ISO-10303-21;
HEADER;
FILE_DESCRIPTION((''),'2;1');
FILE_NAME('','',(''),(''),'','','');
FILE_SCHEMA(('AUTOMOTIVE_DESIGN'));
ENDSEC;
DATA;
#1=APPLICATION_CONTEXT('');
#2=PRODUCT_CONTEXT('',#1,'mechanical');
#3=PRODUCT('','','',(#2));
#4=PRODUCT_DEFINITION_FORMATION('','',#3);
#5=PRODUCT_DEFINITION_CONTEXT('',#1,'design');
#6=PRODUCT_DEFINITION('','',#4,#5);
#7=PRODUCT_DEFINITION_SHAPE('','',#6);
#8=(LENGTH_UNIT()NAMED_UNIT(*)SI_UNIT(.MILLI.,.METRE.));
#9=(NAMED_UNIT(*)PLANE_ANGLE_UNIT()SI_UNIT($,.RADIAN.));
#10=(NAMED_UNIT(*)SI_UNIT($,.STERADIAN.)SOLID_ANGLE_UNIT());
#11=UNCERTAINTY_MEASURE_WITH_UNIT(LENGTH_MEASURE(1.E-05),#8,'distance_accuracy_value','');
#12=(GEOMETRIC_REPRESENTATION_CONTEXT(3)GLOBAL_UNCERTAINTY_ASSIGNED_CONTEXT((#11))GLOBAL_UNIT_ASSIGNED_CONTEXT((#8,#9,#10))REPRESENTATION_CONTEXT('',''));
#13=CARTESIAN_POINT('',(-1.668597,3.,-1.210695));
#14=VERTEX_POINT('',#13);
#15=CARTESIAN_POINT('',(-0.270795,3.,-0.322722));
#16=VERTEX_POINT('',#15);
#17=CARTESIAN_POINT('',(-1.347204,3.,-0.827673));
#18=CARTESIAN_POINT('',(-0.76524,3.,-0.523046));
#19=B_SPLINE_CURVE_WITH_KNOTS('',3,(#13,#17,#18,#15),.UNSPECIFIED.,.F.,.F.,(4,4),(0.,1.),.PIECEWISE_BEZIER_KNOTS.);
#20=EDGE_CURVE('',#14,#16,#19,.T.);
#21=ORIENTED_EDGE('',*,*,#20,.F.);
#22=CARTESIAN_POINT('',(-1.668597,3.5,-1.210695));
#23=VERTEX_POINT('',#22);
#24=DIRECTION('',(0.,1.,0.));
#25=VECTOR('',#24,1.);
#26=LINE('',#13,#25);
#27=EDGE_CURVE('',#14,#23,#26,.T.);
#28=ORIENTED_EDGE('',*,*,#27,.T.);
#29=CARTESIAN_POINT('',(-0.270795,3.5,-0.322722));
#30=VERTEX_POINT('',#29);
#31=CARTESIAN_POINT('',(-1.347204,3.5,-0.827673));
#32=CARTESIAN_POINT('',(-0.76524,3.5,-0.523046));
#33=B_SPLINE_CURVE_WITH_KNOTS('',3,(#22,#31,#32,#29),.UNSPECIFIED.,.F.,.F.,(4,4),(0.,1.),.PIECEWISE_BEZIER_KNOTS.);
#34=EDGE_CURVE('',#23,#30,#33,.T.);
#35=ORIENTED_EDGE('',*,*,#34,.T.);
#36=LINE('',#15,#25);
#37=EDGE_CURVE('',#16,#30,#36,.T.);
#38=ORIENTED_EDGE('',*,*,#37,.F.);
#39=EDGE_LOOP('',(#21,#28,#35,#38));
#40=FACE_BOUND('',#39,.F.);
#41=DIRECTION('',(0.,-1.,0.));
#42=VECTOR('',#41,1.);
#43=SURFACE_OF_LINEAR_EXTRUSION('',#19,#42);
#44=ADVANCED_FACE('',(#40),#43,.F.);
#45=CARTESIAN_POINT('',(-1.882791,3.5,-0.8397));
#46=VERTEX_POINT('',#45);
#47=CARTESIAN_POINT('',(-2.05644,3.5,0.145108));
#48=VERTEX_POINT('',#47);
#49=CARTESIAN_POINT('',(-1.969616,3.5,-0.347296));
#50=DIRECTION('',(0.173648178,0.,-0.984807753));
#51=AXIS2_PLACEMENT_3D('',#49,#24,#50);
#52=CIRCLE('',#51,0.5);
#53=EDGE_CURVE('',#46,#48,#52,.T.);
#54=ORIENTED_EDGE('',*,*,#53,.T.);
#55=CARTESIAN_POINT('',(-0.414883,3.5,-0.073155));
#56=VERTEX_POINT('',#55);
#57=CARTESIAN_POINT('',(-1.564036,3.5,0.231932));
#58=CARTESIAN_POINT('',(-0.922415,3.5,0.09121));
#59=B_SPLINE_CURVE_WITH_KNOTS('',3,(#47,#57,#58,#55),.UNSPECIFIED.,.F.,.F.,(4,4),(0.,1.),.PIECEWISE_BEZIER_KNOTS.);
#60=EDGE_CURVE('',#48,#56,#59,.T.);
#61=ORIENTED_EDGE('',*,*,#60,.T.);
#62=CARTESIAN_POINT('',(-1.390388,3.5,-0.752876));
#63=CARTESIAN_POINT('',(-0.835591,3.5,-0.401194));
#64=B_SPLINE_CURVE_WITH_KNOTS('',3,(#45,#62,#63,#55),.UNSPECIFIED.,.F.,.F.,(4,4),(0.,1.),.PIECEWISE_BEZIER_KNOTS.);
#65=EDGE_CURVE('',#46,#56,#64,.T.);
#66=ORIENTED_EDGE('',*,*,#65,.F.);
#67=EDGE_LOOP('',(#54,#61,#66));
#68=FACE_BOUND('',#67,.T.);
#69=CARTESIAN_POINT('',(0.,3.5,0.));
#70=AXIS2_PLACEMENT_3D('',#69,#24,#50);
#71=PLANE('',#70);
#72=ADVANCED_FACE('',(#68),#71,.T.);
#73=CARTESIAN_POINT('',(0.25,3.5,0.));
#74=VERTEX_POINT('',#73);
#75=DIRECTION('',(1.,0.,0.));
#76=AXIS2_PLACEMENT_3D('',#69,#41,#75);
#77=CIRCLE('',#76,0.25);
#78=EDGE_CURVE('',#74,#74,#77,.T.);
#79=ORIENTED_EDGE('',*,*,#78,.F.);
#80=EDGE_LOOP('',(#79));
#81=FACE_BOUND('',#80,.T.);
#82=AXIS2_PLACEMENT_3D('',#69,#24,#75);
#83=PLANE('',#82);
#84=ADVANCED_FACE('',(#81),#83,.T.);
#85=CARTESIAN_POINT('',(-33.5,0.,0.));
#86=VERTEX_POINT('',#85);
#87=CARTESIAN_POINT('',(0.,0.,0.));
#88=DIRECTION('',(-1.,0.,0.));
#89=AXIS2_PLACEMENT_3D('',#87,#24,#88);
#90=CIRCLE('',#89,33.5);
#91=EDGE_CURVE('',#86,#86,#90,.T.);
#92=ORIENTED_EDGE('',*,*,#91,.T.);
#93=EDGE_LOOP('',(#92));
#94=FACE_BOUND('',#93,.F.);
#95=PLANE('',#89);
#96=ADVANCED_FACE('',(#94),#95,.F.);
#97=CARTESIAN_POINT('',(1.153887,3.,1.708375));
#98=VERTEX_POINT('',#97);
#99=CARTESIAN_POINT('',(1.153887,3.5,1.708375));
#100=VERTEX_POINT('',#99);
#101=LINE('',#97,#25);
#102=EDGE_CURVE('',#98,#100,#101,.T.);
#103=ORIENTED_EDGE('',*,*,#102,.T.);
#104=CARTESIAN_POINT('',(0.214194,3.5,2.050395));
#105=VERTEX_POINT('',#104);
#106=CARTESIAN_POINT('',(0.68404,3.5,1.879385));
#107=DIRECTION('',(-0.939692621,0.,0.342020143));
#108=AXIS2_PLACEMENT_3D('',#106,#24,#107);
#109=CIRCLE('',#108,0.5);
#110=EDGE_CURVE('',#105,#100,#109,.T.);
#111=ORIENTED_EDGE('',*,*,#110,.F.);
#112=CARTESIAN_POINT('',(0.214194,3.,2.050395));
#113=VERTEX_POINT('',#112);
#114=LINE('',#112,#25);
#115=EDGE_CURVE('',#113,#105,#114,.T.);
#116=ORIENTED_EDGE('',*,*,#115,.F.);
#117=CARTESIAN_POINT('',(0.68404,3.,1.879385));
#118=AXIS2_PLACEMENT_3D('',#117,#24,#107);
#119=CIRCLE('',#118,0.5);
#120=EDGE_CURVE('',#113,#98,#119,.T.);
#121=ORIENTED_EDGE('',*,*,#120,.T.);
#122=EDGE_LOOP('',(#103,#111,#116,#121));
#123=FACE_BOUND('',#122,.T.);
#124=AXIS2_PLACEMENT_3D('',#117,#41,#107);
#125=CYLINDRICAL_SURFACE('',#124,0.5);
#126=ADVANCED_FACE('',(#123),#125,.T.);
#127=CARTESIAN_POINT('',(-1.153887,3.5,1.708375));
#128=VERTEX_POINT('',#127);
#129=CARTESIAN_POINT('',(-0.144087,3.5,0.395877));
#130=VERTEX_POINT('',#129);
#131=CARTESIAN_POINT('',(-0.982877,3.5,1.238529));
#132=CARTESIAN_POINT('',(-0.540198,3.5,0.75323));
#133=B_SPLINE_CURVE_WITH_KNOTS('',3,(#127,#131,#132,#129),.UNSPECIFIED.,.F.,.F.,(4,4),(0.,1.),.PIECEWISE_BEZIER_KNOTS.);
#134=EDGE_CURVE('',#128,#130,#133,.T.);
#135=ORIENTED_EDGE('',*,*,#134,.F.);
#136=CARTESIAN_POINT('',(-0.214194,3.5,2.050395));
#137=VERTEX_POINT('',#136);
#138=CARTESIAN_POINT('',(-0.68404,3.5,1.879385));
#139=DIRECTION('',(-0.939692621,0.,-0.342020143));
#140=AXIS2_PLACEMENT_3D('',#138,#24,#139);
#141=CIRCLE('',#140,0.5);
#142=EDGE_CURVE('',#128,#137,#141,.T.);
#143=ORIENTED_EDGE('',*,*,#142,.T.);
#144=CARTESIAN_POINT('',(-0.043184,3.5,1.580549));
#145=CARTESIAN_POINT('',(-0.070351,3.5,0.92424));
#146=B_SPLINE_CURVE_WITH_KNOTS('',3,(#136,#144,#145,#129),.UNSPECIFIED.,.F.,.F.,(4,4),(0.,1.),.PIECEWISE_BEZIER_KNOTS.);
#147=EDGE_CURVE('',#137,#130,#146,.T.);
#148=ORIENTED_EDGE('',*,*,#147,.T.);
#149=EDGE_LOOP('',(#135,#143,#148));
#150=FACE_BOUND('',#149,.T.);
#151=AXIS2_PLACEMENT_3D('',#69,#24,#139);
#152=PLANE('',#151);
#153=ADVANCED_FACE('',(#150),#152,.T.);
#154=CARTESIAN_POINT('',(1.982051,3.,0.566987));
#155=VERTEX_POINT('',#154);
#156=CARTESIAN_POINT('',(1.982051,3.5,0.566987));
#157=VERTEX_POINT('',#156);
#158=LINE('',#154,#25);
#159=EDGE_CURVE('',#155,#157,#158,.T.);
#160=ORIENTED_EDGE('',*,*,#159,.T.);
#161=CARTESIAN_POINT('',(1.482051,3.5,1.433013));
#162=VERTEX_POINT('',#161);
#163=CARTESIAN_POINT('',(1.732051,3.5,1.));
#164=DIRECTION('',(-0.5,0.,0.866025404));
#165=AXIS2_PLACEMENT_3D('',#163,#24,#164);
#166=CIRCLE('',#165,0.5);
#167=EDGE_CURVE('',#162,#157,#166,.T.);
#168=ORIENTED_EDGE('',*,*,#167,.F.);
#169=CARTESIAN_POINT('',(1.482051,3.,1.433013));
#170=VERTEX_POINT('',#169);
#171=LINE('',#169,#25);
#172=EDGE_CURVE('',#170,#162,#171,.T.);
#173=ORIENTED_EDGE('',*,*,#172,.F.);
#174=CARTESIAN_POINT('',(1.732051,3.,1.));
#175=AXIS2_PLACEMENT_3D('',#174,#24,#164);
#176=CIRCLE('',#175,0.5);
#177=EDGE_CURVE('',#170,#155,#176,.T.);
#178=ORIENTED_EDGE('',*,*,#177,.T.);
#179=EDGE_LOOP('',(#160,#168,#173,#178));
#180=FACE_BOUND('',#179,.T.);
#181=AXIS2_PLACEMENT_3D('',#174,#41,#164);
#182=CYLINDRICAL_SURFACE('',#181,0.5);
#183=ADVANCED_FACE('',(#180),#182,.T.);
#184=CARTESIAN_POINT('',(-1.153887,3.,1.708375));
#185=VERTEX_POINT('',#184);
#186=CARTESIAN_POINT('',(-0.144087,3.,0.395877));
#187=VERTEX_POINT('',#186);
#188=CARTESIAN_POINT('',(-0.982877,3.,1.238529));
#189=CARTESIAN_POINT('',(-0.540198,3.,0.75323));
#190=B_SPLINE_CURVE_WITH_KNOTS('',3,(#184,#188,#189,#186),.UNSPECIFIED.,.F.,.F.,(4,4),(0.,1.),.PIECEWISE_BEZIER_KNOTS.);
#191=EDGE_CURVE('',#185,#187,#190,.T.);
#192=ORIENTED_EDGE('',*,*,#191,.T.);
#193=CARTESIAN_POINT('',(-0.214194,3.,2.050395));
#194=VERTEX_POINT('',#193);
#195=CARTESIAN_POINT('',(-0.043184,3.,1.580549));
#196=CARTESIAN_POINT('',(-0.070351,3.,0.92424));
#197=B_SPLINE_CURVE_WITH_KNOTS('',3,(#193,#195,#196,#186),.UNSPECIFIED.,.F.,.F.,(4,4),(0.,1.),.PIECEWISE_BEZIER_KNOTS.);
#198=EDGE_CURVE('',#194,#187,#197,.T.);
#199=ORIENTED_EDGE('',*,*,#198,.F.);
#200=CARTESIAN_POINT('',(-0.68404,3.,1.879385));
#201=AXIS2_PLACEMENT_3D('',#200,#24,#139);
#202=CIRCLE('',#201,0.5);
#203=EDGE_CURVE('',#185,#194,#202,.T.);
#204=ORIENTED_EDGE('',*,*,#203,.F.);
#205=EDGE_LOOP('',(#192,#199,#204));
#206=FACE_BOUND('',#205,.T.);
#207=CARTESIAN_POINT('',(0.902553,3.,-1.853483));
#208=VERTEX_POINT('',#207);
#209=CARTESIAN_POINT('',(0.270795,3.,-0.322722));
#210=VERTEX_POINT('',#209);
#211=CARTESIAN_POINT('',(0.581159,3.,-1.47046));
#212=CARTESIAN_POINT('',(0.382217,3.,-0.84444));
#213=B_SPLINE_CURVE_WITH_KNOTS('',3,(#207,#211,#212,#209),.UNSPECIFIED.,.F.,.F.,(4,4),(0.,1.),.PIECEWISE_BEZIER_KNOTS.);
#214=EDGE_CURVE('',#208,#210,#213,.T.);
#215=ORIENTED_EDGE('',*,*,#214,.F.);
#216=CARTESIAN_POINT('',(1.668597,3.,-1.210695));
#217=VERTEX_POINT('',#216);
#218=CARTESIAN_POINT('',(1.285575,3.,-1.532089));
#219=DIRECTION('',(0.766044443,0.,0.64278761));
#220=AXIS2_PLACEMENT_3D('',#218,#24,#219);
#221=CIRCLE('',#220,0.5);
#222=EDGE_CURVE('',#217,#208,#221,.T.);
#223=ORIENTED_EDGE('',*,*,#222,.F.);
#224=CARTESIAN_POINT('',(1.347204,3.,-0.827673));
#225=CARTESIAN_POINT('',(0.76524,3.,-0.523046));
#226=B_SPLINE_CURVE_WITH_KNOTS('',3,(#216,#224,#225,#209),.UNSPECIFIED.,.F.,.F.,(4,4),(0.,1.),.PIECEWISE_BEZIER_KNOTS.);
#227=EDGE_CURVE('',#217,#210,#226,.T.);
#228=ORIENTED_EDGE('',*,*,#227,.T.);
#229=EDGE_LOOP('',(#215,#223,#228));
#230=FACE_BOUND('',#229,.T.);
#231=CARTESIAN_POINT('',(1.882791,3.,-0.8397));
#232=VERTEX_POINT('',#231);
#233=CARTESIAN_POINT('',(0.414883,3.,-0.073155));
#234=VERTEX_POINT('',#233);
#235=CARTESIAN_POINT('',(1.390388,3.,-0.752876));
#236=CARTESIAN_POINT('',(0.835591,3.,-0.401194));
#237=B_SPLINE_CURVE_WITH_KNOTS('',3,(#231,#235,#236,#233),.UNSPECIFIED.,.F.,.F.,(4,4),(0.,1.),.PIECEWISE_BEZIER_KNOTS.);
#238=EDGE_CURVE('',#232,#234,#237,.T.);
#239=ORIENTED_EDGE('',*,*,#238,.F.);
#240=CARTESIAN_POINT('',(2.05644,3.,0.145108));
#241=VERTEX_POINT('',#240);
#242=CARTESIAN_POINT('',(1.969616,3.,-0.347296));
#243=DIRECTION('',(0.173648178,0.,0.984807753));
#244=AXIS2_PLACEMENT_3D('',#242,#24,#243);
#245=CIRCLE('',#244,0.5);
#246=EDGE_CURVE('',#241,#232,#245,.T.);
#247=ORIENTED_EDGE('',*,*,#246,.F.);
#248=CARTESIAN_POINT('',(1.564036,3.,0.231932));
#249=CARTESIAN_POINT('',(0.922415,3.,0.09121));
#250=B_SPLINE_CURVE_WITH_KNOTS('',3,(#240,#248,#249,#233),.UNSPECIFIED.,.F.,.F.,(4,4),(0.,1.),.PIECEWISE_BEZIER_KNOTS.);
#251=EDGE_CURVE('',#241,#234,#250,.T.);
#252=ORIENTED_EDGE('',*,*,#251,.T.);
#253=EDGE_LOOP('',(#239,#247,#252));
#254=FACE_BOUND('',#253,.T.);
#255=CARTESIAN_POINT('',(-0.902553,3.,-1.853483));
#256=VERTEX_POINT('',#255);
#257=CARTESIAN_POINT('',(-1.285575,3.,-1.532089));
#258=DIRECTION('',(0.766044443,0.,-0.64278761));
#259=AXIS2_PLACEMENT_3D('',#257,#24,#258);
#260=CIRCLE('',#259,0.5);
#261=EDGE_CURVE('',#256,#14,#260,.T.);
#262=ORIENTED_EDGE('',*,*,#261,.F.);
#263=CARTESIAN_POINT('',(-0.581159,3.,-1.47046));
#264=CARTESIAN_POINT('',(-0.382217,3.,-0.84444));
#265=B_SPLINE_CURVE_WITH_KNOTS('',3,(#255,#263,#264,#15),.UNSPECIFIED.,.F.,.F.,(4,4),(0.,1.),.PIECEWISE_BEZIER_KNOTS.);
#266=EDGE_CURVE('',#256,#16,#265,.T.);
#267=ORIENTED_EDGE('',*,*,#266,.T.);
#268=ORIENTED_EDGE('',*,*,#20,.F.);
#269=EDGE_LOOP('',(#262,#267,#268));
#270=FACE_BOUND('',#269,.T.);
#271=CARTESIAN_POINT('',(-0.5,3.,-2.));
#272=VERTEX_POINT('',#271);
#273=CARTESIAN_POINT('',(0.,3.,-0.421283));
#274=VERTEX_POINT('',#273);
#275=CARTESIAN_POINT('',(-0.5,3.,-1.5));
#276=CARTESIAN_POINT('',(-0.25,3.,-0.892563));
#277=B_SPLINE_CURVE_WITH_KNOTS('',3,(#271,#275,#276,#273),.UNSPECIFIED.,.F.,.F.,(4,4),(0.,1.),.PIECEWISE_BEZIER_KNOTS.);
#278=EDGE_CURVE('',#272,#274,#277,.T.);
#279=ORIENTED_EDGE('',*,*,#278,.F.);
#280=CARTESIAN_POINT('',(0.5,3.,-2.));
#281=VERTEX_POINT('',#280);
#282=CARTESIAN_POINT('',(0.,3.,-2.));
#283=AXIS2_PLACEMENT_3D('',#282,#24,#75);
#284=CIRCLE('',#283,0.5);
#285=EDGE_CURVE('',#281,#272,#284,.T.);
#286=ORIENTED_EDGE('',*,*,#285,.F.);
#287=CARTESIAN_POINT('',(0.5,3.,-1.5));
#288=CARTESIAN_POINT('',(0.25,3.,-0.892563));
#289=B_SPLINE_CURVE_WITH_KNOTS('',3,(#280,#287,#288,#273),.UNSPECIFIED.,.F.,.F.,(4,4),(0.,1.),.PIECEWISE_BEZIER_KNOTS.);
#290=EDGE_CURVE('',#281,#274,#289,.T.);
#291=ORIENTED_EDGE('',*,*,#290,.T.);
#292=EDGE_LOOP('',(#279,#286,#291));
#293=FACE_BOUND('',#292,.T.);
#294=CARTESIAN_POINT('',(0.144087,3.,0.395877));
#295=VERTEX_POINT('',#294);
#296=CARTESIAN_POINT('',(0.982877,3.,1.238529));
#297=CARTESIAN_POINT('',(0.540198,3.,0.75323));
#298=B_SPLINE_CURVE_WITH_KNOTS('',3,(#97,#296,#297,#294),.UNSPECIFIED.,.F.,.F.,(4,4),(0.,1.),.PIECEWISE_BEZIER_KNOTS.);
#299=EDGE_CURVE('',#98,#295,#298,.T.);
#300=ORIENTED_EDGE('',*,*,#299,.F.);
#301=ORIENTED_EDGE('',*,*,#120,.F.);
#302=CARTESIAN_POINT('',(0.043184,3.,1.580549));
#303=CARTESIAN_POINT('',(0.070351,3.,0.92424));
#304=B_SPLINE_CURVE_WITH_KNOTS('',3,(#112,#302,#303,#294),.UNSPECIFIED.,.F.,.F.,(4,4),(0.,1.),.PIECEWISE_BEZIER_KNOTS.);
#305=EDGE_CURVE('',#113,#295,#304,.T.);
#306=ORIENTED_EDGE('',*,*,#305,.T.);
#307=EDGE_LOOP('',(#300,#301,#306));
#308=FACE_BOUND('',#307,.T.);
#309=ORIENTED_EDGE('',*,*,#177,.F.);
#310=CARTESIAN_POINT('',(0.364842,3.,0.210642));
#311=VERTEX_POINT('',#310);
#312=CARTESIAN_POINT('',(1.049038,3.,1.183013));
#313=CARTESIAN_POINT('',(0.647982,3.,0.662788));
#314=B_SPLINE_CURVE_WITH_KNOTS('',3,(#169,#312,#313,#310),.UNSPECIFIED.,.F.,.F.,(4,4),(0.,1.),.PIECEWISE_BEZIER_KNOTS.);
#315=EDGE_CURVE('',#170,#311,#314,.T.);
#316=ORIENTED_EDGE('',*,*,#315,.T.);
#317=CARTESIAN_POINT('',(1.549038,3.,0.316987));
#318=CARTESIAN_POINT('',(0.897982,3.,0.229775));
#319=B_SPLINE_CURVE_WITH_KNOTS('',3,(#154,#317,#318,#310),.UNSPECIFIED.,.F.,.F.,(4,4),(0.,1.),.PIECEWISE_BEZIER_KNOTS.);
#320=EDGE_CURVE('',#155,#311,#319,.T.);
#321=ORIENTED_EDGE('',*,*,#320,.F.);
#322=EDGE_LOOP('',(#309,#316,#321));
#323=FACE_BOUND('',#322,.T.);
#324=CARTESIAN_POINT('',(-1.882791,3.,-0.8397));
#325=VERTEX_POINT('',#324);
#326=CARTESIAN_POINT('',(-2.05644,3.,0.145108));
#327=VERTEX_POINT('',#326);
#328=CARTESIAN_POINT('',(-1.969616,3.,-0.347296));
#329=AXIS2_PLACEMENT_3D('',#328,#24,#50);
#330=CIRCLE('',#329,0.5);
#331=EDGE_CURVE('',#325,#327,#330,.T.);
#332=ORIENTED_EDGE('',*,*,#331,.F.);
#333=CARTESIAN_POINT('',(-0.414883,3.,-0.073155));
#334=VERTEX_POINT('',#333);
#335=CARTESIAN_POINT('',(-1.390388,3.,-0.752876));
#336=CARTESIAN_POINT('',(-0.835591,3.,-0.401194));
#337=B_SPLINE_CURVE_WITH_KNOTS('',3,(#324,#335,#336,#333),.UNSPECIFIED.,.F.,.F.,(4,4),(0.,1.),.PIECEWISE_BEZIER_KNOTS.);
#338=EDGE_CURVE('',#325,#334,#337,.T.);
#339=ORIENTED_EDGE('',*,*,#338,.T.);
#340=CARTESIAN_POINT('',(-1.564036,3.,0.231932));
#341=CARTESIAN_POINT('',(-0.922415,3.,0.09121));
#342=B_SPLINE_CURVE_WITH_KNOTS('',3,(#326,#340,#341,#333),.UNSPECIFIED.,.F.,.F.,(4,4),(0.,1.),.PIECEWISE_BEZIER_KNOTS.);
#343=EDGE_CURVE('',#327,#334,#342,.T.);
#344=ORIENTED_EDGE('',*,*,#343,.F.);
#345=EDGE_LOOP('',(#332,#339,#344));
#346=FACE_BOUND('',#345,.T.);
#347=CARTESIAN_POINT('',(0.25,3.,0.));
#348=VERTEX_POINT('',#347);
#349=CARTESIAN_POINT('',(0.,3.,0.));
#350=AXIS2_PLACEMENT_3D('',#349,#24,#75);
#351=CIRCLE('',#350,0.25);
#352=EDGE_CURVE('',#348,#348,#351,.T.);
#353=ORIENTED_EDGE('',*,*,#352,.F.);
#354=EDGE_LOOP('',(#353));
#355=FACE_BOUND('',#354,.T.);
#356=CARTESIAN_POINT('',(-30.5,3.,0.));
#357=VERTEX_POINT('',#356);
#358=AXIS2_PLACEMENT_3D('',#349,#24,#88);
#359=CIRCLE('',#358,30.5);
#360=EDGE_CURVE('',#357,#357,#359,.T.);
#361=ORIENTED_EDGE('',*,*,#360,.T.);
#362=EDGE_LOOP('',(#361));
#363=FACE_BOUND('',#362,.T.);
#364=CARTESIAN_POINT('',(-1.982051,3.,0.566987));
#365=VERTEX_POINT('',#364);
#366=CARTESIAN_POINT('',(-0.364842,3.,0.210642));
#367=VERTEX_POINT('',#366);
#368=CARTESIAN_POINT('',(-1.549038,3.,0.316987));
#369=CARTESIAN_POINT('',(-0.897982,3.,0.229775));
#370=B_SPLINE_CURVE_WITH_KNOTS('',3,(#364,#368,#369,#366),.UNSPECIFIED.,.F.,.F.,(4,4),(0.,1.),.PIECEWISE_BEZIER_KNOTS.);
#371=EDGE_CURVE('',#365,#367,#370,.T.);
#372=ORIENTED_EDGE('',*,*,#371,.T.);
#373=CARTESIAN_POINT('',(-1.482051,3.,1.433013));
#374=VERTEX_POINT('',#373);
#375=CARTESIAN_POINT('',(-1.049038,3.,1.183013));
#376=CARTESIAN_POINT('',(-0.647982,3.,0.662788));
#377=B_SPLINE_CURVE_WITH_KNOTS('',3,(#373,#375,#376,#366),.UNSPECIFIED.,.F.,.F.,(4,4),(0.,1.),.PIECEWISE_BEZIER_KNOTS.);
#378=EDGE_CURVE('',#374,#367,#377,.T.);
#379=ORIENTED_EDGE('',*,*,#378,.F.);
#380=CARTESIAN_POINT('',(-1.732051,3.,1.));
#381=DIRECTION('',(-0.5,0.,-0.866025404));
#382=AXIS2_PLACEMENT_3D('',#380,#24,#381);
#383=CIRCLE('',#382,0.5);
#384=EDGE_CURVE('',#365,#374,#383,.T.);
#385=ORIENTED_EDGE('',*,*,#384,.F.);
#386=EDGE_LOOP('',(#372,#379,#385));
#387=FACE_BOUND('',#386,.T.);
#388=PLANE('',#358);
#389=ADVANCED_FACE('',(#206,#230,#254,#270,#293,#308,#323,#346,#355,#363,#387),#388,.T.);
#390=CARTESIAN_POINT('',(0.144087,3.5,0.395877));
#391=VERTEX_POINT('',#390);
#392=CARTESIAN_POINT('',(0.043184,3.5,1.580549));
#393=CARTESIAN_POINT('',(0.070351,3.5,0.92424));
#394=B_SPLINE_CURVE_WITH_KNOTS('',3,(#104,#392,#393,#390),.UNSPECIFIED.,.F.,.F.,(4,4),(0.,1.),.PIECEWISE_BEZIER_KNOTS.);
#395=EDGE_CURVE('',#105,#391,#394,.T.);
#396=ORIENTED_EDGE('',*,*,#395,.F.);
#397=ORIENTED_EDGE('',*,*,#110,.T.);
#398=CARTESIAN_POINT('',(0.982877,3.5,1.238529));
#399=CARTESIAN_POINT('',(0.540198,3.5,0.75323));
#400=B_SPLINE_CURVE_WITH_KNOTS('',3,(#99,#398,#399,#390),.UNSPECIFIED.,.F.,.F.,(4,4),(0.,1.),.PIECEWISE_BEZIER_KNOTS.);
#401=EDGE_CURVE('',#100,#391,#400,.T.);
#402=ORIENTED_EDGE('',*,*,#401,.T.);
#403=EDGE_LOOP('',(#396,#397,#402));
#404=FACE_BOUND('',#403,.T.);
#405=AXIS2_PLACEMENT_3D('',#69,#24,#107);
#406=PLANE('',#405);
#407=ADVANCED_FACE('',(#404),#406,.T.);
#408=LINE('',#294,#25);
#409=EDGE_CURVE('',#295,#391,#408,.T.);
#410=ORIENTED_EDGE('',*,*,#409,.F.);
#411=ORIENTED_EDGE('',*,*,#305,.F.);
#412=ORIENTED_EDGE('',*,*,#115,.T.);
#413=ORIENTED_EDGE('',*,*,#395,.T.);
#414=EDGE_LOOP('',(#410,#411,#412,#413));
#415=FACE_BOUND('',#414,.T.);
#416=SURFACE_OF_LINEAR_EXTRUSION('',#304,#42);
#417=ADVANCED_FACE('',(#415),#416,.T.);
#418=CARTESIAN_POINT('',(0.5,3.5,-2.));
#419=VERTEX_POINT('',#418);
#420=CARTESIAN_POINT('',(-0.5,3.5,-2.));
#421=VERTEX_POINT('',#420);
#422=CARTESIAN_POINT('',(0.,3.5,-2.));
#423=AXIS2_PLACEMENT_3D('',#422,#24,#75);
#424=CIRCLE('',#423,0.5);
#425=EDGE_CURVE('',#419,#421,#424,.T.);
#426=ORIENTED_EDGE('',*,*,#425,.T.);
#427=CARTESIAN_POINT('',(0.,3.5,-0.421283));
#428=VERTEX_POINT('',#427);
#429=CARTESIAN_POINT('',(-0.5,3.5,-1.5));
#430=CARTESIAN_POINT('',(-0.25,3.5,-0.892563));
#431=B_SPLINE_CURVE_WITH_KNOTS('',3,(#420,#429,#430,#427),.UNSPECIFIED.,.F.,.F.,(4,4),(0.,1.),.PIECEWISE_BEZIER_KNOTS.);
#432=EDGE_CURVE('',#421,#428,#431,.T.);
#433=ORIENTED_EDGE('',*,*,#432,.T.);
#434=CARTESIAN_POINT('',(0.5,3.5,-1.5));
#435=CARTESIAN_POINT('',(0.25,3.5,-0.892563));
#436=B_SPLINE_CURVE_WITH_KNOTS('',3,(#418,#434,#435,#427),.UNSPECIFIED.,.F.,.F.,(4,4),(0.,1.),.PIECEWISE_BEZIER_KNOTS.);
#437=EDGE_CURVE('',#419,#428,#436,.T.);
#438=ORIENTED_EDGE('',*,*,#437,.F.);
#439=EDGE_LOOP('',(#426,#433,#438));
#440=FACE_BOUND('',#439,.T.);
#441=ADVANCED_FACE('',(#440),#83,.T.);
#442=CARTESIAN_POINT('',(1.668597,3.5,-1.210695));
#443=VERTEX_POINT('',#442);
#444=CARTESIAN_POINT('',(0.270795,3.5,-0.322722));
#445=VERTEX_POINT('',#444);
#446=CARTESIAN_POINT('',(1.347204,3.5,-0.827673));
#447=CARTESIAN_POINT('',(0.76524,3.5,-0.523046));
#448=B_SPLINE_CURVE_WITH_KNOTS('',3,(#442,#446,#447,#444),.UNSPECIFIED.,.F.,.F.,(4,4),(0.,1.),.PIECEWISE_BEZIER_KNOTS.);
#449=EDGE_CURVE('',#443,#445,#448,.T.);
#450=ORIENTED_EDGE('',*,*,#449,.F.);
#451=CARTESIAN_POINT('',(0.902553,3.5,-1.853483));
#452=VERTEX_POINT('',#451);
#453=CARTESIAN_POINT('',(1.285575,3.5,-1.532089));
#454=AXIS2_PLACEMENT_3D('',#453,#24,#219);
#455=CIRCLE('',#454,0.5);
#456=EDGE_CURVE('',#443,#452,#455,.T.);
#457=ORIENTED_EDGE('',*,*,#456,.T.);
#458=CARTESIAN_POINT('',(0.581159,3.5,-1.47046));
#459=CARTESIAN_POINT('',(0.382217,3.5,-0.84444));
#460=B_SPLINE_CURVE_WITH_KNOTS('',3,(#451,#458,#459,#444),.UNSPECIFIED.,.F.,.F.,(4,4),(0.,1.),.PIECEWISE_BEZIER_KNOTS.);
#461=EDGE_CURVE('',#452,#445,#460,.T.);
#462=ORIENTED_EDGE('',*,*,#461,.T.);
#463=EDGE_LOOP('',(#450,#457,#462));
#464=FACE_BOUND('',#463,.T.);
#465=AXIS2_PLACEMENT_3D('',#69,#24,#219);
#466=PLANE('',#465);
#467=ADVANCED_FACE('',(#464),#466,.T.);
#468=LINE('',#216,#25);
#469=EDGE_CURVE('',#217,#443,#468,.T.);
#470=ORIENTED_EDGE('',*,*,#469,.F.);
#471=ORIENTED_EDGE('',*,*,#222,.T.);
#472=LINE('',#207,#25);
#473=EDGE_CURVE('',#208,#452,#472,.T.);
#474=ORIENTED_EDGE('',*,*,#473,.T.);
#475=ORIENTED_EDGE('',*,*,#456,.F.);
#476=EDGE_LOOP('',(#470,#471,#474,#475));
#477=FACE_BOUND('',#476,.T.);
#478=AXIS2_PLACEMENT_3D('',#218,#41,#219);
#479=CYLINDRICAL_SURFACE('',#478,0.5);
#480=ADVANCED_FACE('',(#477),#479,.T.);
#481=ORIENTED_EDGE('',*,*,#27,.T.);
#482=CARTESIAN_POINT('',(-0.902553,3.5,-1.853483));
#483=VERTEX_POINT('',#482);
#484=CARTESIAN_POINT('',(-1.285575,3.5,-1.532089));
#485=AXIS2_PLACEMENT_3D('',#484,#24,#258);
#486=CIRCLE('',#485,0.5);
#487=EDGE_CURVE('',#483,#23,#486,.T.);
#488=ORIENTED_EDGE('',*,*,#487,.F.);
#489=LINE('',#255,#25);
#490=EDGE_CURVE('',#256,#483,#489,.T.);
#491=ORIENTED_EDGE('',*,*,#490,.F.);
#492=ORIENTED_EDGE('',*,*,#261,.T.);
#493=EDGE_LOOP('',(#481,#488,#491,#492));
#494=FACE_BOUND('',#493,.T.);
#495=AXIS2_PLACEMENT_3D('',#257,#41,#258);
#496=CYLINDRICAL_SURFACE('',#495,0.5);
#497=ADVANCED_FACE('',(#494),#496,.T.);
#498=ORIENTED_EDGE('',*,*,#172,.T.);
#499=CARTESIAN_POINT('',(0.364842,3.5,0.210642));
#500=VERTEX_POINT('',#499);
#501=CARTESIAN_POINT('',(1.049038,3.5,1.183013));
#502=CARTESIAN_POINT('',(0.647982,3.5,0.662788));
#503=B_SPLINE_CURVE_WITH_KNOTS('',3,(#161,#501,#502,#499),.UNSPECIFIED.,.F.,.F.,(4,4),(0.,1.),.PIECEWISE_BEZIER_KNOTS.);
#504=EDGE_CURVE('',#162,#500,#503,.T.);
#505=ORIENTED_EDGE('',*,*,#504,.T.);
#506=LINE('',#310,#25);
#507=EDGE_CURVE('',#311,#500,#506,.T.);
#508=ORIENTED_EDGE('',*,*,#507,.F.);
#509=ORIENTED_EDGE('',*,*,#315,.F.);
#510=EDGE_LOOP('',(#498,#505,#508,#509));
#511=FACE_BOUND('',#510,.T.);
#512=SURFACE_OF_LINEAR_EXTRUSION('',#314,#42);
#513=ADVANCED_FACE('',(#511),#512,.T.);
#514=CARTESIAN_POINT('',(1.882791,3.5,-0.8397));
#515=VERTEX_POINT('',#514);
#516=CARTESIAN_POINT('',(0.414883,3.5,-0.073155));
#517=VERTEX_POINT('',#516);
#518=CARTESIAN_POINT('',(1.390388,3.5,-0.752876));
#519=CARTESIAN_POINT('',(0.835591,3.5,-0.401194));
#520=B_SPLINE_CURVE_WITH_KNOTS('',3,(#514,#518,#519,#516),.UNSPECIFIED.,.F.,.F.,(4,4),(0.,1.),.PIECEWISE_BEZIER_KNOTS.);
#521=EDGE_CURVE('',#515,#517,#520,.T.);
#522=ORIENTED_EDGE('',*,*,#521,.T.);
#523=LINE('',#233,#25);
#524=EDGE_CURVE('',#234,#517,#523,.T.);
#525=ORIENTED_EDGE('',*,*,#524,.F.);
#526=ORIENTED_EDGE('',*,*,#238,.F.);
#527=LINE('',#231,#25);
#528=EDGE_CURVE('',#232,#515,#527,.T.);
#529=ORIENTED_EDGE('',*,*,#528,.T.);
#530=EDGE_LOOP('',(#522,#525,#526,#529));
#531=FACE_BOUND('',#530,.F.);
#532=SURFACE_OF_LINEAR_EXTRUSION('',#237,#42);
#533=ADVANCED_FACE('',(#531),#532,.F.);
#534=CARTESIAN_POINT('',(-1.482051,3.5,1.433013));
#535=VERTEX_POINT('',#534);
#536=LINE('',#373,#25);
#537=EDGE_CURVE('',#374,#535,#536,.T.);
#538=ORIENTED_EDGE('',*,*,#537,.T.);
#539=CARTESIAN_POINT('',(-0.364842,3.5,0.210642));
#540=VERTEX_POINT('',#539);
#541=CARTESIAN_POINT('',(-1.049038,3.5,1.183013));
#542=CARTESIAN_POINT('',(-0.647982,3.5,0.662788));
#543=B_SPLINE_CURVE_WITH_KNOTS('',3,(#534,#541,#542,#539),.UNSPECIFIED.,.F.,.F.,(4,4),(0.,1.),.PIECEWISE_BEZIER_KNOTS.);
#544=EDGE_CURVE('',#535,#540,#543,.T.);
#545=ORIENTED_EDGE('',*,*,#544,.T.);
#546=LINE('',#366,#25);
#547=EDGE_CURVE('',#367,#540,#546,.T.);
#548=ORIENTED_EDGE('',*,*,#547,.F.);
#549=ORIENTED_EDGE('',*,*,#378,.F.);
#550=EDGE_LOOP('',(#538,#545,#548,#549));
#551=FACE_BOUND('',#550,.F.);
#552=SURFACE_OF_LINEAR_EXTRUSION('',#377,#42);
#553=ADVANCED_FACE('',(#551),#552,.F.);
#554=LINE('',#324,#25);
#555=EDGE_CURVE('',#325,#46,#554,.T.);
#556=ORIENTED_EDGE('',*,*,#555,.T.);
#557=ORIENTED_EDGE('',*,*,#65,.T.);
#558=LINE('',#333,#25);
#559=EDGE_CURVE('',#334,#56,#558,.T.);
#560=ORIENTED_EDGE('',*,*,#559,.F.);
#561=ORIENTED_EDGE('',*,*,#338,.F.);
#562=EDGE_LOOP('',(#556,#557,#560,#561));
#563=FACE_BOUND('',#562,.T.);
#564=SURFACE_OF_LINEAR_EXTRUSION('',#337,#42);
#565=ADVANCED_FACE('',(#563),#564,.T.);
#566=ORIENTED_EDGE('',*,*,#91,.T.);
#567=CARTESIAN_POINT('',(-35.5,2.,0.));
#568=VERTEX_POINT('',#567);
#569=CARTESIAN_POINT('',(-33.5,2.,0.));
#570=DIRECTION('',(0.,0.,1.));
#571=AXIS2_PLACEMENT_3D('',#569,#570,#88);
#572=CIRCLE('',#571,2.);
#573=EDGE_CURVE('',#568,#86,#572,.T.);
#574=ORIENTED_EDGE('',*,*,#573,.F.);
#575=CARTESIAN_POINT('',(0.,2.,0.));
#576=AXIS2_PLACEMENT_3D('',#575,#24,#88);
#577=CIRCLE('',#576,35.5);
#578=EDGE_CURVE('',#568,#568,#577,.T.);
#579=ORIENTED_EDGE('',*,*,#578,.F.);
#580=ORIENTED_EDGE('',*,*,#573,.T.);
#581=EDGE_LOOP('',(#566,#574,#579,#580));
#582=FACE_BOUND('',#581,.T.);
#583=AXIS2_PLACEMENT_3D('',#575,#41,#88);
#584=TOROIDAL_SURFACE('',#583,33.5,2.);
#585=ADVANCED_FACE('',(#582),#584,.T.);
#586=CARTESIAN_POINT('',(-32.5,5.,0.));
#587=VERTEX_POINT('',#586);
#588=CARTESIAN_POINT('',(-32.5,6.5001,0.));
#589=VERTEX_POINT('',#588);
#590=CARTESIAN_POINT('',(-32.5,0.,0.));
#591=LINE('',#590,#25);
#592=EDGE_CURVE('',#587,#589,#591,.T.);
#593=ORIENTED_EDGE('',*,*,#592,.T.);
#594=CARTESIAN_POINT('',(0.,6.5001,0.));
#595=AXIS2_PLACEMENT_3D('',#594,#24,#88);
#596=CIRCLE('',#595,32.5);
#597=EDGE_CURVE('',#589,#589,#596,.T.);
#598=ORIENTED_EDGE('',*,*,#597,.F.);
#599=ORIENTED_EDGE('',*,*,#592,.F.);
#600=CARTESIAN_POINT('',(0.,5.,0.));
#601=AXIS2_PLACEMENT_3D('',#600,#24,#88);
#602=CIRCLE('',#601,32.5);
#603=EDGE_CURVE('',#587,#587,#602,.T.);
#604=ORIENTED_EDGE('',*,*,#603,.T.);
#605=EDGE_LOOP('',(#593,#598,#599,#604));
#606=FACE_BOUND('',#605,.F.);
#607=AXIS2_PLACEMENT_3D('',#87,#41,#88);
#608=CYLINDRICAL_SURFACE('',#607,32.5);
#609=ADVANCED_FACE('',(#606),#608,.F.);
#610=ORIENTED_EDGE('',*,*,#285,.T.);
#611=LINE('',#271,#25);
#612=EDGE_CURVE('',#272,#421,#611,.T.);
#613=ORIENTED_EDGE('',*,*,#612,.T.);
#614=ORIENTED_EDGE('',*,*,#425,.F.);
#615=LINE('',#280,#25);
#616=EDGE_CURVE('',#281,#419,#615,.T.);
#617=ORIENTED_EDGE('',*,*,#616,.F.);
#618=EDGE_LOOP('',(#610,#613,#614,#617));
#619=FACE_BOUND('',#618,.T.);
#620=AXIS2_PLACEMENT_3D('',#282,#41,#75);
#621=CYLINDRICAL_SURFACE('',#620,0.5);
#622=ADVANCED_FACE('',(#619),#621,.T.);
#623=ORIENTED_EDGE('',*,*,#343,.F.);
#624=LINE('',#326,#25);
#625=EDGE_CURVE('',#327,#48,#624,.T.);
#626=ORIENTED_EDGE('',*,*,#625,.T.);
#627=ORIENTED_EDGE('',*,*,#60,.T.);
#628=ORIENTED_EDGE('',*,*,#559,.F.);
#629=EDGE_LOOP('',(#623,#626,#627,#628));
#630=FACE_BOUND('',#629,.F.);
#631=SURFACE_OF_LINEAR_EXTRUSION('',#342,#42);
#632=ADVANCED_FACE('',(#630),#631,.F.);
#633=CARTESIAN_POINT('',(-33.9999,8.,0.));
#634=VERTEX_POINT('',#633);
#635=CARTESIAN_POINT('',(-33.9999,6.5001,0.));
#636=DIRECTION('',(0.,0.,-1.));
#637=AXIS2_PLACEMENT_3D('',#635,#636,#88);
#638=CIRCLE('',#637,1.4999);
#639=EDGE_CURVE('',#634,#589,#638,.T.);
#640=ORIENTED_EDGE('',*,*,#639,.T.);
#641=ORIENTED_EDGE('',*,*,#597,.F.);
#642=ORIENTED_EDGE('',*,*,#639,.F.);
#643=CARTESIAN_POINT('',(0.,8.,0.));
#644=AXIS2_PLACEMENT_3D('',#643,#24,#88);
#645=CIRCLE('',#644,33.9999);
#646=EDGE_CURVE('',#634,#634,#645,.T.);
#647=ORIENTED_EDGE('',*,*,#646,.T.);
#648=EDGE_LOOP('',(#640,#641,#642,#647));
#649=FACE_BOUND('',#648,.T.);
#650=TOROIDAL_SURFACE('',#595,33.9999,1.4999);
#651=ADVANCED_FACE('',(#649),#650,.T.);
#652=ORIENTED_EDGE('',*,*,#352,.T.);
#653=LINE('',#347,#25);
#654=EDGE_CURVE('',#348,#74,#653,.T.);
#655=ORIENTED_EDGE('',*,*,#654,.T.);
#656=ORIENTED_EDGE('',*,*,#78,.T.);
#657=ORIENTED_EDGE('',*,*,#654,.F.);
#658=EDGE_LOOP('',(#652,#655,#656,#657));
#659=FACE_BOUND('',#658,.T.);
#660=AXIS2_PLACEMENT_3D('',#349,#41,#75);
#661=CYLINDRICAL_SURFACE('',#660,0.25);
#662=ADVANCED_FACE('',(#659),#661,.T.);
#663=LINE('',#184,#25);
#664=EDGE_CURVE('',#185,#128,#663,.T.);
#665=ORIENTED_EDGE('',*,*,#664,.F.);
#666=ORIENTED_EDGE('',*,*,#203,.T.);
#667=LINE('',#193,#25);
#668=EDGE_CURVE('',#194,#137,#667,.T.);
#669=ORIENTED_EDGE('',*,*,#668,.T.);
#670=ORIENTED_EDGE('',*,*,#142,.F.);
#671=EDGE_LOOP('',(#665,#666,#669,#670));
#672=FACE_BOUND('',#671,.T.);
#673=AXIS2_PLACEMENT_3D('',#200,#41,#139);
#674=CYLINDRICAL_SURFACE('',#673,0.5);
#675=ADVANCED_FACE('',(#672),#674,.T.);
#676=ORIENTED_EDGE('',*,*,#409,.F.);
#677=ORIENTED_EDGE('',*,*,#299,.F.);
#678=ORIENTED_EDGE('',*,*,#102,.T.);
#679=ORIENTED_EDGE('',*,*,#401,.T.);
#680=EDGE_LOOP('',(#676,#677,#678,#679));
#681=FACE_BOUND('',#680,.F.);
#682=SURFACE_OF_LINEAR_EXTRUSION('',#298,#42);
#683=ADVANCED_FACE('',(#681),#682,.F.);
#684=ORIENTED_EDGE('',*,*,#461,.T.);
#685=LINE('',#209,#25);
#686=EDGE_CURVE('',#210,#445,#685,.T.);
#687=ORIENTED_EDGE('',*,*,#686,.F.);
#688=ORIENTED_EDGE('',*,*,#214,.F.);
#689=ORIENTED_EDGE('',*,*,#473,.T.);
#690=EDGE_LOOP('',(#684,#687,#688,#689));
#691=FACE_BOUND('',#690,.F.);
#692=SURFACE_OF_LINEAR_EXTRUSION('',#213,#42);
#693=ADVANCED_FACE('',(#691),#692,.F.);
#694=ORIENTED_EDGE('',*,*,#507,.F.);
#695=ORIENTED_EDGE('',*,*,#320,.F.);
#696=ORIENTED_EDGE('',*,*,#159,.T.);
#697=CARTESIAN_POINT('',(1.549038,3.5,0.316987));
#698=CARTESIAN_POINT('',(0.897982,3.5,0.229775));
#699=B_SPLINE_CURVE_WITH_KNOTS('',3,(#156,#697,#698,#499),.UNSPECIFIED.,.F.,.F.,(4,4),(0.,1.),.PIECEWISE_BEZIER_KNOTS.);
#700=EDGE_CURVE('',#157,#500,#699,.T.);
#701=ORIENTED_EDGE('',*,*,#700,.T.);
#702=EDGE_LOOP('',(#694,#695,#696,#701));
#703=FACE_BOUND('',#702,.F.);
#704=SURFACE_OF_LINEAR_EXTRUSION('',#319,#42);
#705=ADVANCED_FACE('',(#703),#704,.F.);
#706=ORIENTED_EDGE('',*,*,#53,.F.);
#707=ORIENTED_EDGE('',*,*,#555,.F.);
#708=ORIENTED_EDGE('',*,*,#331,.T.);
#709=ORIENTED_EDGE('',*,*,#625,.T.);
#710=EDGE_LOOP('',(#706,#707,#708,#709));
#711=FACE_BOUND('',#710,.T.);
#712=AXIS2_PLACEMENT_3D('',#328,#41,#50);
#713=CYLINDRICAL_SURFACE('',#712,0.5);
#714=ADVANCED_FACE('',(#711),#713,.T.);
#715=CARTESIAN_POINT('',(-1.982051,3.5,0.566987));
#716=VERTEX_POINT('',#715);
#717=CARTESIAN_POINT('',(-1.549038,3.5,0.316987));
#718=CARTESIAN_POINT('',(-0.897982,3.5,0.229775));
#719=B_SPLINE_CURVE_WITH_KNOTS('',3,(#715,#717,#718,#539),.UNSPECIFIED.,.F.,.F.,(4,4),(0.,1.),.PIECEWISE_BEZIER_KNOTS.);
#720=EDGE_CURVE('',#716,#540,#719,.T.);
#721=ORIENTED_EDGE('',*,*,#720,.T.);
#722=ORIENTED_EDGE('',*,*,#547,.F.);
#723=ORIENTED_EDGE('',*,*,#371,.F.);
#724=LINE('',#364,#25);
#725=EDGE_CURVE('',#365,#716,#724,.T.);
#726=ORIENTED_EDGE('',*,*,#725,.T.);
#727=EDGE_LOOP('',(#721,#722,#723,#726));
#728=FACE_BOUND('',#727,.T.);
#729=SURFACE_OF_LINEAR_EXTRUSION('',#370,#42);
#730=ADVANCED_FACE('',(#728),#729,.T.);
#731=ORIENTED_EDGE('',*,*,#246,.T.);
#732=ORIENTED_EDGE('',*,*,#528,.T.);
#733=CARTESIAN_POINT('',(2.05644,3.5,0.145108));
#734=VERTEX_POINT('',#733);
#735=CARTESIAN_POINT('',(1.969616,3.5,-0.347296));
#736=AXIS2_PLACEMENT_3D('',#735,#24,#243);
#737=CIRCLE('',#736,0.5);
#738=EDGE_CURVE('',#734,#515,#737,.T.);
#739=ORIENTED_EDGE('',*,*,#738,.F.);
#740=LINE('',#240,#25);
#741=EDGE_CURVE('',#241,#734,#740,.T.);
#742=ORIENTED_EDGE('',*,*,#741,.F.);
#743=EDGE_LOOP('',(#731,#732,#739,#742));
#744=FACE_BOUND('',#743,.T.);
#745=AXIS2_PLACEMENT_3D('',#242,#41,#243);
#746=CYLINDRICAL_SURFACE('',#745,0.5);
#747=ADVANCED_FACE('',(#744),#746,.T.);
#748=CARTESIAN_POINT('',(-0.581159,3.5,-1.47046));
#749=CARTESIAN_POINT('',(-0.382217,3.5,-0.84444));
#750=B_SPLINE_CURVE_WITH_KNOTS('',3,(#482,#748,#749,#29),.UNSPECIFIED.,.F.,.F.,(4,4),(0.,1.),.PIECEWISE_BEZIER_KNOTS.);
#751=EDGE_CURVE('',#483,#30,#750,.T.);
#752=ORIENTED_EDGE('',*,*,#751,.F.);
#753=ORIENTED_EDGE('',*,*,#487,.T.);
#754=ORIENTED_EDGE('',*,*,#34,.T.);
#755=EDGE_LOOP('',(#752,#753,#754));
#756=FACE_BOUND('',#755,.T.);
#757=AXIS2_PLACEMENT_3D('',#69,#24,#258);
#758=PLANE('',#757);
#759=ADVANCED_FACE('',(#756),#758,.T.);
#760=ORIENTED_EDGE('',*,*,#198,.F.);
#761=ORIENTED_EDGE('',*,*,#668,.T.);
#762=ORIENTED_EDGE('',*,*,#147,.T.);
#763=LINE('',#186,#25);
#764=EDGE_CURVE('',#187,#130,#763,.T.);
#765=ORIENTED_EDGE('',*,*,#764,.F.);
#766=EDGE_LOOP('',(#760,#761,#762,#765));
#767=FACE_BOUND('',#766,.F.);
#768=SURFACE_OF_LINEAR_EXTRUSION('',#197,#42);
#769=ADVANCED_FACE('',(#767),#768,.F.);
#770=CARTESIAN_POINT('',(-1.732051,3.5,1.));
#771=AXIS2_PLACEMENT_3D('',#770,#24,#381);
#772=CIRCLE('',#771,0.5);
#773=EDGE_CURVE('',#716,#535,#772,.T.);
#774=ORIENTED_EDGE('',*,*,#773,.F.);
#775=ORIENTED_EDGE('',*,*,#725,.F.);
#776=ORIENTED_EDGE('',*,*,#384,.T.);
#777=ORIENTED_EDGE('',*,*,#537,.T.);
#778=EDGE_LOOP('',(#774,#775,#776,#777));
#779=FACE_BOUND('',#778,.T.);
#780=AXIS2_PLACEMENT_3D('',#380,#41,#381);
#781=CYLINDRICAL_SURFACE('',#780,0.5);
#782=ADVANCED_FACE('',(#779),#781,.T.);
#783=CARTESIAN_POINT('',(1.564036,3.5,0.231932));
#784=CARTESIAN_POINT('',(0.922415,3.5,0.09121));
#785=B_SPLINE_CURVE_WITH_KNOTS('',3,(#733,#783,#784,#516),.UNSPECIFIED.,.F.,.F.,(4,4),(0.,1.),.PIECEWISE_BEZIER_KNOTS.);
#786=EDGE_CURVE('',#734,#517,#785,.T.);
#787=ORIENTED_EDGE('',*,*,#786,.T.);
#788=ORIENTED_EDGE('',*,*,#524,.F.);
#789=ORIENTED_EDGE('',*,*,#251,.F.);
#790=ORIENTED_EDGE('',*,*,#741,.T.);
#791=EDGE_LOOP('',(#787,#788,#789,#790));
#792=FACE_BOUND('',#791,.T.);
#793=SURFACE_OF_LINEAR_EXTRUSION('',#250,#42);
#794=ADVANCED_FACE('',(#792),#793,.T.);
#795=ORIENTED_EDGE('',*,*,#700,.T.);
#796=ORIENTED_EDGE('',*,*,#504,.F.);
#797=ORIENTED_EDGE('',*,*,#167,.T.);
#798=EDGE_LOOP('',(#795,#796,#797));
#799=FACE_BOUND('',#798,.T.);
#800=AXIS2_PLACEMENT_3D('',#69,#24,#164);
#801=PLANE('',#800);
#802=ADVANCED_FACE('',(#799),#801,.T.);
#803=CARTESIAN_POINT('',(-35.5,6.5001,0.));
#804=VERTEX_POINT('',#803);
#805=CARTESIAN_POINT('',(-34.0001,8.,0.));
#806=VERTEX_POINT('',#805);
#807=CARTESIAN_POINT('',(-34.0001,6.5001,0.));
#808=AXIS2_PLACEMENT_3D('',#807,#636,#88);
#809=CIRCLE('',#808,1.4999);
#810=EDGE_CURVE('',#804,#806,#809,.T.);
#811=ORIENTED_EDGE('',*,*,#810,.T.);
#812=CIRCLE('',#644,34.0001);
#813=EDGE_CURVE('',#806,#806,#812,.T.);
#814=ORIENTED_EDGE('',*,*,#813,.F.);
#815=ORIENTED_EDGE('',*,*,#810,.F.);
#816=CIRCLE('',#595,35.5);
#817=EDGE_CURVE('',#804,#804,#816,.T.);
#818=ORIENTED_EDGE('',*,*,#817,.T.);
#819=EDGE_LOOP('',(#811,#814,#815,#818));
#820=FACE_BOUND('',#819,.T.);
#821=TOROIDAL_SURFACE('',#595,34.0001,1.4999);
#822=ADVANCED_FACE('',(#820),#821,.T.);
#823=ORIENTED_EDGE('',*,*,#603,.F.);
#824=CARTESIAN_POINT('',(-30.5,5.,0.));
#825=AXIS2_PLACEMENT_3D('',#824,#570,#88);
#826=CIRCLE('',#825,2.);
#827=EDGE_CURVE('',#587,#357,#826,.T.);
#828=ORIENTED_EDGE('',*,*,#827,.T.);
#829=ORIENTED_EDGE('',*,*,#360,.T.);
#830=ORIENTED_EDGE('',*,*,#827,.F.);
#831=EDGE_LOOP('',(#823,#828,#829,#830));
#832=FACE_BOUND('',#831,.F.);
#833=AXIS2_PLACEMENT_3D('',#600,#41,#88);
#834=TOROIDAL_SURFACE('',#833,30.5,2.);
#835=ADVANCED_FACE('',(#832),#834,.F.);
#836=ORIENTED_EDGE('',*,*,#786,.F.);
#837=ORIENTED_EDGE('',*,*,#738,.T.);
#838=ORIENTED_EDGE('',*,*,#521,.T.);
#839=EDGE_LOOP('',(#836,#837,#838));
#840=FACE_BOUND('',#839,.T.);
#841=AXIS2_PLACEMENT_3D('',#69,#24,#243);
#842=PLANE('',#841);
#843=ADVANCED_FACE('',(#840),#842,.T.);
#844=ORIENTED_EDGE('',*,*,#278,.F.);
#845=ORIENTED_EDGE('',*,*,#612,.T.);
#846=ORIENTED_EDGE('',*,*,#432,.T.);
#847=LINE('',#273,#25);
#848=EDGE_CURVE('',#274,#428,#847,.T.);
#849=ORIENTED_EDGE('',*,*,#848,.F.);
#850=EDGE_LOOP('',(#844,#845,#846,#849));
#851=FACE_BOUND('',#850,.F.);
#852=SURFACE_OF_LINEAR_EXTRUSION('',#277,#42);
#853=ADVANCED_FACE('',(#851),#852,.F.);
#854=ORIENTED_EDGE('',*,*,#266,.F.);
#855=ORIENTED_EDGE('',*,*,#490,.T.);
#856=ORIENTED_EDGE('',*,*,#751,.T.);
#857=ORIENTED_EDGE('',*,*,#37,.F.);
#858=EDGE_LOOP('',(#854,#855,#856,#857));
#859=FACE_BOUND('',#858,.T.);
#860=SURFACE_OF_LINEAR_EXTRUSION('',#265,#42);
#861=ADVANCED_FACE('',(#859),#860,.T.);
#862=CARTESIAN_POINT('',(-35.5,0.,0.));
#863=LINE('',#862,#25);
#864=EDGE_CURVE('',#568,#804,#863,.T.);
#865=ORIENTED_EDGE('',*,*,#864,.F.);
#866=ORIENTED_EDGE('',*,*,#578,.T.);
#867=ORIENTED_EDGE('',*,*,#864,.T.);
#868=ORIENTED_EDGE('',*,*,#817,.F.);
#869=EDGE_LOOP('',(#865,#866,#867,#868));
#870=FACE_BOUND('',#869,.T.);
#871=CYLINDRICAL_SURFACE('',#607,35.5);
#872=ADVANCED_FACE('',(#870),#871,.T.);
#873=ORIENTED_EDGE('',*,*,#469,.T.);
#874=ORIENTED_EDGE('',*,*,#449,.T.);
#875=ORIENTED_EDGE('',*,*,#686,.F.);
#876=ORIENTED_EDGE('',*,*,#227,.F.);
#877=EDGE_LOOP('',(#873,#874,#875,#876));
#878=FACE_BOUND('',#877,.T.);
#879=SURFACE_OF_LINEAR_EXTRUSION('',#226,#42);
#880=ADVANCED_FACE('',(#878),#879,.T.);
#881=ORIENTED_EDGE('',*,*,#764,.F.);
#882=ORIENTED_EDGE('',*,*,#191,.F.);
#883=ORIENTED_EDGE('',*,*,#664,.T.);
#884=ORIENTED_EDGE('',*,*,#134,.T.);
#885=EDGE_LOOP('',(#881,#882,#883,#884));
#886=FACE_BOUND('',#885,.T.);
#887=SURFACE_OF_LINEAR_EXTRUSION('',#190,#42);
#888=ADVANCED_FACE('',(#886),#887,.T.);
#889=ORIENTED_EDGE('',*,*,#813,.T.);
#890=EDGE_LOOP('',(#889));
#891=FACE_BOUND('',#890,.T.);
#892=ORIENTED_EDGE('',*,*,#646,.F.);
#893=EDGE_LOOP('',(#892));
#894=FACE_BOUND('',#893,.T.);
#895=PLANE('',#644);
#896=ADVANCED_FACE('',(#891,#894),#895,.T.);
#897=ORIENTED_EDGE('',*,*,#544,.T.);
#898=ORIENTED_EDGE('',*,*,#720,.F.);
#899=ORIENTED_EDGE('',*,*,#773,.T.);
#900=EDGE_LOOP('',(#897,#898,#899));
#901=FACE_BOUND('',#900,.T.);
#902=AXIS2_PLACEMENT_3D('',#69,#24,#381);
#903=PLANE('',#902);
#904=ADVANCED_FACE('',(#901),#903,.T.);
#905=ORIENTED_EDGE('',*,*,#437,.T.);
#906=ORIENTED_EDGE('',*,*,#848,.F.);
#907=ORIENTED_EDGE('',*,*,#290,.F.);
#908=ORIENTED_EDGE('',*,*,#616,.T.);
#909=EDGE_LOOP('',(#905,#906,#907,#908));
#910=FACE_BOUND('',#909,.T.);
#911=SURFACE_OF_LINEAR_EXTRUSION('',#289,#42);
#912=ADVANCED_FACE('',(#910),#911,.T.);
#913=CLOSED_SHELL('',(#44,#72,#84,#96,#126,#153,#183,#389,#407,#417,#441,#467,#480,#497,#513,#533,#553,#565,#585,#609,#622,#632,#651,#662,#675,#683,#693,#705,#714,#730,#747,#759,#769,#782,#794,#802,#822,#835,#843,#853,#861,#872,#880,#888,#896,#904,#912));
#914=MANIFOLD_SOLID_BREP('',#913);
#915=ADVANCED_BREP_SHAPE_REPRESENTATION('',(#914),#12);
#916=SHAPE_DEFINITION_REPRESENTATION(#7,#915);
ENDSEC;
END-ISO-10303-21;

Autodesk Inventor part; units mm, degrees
ref_plane "YZ Plane" through (0, 0, 0) normal (1, 0, 0) x (0, 1, 0)
ref_plane "XZ Plane" through (0, 0, 0) normal (0, 1, 0) x (-1, 0, 0)
ref_plane "XY Plane" through (0, 0, 0) normal (0, 0, 1) x (1, 0, 0)
sketch "Sketch1" plane through (0, 0, 0) normal (0, 1, 0) x (-1, 0, 0)
  circle A0 centre (0, 0) radius 32.5
  circle A1 centre (0, 0) radius 35.5
  dimension "d0" = 65
  dimension "d1" = 71
extrude "Extrusion1" add sketch "Sketch1" along normal blind 8
extrude "Extrusion2" add sketch "Sketch1" along normal blind 3 contours A0
fillet "Fillet1" radius 2 2 edges at (35.5, 0, 0) (32.5, 3, 0)
fillet "Fillet2" radius 1.5 2 edges at (32.5, 8, 0) (35.5, 8, 0)
sketch "Sketch2" plane through (0, 3, 0) normal (0, 1, 0) x (1, 0, 0)
  circle A0 centre (0, 0) radius 0.25
  circle A1 centre (0, 0) radius 2.5
  circle A2 centre (0, 2) radius 0.5
  line L0 (-0.5, 2) -> (-0.5, 1.5) construction
  line L1 (-0.5, 1.5) -> (-0.25, 0.892563) construction
  line L2 (-0.25, 0.892563) -> (0, 0.421283) construction
  spline S0 degree 3 poles (-0.5, 2) (-0.5, 1.5) (-0.25, 0.892563) (0, 0.421283) knots 1 1 1 1 2 2 2 2
  line L3 (-0.5, 1.5) -> (0.5, 1.5)
  line L4 (-0.25, 0.892563) -> (0.25, 0.892563)
  line L5 (0.5, 2) -> (0.5, 1.5) construction
  line L6 (0.5, 1.5) -> (0.25, 0.892563) construction
  line L7 (0.25, 0.892563) -> (0, 0.421283) construction
  spline S1 degree 3 poles (0.5, 2) (0.5, 1.5) (0.25, 0.892563) (0, 0.421283) knots 1 1 1 1 2 2 2 2
  dimension "d12" = 0.5
  dimension "d13" = 5
sketch "Sketch2 outline for Extrusion4" plane through (0, 3, 0) normal (0, 1, 0) x (1, 0, 0)
  circle A0 centre (0, 0) radius 0.25
  spline S0 degree 3 poles (0.5, 2) (0.5, 1.5) (0.25, 0.892563) (0, 0.421283) knots 0 0 0 0 1 1 1 1
  spline S1 degree 3 poles (-0.5, 2) (-0.5, 1.5) (-0.25, 0.892563) (0, 0.421283) knots 0 0 0 0 1 1 1 1
  arc A1 (0.5, 2) -> (-0.5, 2) centre (0, 2) ccw
extrude "Extrusion4" add sketch "Sketch2 outline for Extrusion4" along normal blind 0.5
pattern_circular "Circular Pattern1" count 9 over 360 about axis through (0, -10, 0) along (0, 1, 0) of "Extrusion4"
properties part number "Orchid Coaster V5"
